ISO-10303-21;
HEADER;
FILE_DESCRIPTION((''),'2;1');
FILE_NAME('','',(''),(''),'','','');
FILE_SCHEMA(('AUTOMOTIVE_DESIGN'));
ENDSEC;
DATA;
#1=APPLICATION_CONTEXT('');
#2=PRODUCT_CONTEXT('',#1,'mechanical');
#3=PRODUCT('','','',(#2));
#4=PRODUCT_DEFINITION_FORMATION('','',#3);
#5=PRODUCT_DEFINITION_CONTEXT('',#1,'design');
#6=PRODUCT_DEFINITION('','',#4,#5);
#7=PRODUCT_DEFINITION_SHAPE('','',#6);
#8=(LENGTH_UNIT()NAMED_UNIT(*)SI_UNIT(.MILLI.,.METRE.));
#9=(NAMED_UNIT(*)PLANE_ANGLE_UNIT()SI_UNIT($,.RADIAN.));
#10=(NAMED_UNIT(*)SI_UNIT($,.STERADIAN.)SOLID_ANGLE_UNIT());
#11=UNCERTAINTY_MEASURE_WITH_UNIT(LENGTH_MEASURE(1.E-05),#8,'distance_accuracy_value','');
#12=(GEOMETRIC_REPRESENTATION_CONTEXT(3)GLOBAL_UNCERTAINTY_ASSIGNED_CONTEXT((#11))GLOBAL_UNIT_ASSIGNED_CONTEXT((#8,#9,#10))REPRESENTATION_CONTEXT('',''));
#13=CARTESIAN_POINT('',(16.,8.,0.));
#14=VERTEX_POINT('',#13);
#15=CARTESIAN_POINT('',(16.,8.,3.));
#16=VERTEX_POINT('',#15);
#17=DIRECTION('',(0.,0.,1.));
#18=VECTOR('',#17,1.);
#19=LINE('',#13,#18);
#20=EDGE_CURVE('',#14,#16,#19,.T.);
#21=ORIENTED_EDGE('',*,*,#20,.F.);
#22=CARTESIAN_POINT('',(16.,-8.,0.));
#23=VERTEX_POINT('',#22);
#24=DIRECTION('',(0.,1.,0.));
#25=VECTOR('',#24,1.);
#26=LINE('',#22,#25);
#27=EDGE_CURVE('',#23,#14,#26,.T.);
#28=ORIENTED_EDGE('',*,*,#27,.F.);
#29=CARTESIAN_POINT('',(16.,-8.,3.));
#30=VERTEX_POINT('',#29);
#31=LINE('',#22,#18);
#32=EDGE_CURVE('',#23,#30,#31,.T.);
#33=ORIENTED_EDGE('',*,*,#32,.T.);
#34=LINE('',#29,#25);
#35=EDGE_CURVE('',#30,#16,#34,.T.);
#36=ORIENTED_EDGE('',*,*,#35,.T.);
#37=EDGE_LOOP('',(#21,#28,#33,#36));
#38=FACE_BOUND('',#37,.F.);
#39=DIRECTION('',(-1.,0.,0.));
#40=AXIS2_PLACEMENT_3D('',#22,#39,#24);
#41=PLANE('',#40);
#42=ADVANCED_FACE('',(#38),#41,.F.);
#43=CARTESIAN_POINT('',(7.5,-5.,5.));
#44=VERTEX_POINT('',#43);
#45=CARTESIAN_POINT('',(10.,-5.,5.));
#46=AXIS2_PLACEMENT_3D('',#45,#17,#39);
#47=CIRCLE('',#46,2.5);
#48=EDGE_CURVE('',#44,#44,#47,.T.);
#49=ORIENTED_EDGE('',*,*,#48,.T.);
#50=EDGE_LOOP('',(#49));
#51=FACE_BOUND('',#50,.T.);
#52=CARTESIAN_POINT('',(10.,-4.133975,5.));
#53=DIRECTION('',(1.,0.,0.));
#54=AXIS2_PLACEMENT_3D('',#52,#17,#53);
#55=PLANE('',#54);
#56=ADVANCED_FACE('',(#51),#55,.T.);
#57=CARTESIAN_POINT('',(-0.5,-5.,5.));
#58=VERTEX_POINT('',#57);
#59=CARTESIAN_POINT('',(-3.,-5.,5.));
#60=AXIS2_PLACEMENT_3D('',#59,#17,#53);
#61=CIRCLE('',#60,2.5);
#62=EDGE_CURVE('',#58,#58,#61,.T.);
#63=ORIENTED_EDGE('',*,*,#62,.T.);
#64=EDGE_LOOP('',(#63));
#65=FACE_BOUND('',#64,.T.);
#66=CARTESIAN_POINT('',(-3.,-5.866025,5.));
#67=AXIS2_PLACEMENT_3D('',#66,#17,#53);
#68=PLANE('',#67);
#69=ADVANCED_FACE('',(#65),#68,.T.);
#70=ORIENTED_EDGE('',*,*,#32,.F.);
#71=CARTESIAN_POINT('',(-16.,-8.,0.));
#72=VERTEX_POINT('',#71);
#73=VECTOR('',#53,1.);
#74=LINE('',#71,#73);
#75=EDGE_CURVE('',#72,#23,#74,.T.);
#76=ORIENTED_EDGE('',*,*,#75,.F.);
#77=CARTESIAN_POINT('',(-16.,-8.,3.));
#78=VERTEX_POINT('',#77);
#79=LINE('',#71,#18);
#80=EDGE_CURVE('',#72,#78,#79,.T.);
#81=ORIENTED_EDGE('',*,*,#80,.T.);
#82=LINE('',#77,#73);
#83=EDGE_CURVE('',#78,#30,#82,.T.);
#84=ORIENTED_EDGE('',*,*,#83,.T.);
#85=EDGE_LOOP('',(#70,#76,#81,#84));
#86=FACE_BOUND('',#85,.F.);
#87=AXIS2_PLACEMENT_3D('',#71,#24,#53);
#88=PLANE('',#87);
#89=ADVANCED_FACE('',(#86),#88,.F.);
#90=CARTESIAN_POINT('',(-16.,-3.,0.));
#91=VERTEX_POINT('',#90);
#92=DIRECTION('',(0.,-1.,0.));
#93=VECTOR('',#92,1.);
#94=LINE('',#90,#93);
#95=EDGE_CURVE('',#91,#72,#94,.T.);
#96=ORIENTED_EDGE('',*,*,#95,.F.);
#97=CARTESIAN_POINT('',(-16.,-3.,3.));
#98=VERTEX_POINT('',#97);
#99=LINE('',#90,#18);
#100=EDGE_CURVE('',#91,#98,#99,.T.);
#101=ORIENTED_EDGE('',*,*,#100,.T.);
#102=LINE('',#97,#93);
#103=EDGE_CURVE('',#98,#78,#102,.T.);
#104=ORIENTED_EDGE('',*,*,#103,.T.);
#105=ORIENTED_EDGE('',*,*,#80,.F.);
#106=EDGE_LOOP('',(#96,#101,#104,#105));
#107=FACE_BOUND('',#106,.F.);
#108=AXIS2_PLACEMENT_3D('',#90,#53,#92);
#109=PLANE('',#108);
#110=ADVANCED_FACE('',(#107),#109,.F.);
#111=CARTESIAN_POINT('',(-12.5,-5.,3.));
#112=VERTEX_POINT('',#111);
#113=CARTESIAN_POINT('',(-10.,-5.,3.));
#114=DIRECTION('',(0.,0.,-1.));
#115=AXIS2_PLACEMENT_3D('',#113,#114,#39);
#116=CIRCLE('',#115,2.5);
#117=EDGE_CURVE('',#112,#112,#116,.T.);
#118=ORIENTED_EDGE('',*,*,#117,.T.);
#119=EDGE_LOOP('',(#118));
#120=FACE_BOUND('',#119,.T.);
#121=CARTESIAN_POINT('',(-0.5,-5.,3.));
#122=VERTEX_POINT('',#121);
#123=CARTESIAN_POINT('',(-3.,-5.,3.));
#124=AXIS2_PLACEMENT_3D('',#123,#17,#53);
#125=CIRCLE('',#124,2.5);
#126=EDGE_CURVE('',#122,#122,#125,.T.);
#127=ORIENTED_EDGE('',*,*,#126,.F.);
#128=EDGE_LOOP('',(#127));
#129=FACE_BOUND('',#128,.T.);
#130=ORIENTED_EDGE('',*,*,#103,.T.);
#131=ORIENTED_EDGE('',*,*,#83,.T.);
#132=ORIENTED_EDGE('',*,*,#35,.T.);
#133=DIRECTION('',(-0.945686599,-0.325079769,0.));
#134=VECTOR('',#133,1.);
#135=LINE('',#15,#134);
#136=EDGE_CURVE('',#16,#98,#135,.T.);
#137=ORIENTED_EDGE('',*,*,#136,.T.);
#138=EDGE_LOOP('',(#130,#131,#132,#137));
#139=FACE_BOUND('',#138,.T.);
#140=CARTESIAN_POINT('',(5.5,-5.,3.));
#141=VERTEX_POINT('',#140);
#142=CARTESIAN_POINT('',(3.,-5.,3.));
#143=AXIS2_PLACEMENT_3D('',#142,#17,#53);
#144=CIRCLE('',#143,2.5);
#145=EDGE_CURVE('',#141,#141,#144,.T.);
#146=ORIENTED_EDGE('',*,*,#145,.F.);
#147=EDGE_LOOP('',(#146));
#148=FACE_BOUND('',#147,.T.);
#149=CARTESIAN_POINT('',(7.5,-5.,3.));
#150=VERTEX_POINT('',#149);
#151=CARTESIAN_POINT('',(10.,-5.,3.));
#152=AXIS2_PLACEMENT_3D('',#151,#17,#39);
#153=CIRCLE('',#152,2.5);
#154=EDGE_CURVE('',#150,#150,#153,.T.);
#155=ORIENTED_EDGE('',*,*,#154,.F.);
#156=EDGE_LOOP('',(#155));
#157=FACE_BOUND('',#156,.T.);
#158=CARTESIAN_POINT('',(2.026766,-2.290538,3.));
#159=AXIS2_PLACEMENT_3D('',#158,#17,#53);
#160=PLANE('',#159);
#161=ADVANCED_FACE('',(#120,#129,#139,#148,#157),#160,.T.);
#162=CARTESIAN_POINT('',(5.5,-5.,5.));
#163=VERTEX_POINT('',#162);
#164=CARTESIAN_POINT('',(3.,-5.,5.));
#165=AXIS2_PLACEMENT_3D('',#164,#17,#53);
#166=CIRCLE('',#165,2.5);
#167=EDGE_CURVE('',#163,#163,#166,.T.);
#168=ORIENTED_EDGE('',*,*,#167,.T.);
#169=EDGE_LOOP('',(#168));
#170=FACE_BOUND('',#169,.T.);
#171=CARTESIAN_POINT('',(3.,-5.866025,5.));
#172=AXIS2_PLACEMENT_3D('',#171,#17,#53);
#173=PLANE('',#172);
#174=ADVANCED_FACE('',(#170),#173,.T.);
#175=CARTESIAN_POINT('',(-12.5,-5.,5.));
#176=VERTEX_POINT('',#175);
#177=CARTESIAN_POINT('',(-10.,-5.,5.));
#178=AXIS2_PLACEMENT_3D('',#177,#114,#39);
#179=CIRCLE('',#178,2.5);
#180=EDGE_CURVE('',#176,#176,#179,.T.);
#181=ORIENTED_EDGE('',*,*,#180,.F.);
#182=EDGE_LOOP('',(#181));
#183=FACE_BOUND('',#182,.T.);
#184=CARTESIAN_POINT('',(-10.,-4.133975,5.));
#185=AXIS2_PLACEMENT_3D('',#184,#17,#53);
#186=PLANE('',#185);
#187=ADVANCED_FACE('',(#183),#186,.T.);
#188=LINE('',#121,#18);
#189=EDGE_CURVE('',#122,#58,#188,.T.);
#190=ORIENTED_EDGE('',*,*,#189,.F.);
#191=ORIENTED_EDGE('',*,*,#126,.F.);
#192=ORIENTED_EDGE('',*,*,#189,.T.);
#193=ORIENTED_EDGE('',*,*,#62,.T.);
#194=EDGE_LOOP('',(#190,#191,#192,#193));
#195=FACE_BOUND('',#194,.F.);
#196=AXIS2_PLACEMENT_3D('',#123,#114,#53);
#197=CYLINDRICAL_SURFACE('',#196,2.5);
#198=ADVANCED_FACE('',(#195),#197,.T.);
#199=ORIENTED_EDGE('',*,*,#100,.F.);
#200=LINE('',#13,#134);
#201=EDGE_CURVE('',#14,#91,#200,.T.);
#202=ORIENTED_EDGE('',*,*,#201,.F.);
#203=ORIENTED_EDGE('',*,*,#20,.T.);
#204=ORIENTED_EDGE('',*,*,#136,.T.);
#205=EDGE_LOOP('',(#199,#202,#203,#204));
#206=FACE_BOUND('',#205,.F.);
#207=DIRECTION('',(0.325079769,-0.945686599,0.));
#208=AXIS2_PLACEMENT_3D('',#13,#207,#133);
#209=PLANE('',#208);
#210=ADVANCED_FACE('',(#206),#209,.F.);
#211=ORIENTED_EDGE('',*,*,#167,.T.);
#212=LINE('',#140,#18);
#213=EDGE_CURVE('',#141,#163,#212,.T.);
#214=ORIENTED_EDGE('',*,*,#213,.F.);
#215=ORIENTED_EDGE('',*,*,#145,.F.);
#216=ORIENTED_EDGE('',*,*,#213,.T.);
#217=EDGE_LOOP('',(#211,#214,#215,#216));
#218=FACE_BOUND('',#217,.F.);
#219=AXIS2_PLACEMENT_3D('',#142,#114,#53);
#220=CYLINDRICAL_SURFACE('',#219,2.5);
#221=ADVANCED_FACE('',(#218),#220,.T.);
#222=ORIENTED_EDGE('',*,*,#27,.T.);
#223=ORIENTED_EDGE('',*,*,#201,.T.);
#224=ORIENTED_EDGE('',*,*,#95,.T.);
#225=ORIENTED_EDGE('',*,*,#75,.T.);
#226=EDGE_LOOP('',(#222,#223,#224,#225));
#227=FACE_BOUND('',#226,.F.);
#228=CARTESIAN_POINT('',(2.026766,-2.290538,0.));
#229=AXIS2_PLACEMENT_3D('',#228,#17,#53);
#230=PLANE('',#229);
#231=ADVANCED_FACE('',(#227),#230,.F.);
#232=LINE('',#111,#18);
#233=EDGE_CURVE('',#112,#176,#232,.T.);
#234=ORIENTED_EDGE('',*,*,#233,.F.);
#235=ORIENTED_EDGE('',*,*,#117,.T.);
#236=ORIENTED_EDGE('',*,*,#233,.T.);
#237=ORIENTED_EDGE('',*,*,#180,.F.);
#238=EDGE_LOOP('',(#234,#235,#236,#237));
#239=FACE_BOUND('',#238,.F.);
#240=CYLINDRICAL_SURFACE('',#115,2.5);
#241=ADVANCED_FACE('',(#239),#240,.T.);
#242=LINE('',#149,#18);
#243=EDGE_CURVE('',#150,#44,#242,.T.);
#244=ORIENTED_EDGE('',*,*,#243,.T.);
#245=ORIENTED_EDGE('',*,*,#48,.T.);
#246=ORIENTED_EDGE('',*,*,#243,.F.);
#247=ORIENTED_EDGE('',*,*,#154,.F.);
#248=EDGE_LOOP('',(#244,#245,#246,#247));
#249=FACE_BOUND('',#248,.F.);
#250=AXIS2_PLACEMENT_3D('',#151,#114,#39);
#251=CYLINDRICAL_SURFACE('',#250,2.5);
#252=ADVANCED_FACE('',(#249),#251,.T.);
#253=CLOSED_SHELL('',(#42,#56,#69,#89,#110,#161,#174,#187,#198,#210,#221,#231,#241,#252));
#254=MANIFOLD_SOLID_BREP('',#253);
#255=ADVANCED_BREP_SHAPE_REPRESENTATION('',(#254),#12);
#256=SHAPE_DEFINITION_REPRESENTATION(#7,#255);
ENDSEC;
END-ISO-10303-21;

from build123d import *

# Parameters (mm, degrees)
F1_DEPTH = 3
F3_DEPTH = 2
F4_DEPTH = 2


# Not quite as in the source:
# - a feature names something its author has since deleted; it is built from what else it names


with BuildPart() as f1:
    # F0 (on Top) → F1 (new body)
    with BuildSketch(Plane.XY):
        Polygon((-16, -8), (16, -8), (16, 8), (-16, -3), align=None)
    extrude(amount=F1_DEPTH)

    # F2 (on face) → F3 (join)
    with BuildSketch(Plane.XY.offset(3)):
        with BuildLine():
            Line((7.5, -5), (12.5, -5))
            ThreePointArc((12.5, -5), (10, -2.5), (7.5, -5))
        make_face()
        with BuildLine():
            ThreePointArc((7.5, -5), (10, -7.5), (12.5, -5))
            Line((12.5, -5), (7.5, -5))
        make_face()
        with BuildLine():
            ThreePointArc((-7.5, -5), (-10, -2.5), (-12.5, -5))
            Line((-12.5, -5), (-7.5, -5))
        make_face()
        with BuildLine():
            Line((-7.5, -5), (-12.5, -5))
            ThreePointArc((-12.5, -5), (-10, -7.5), (-7.5, -5))
        make_face()
    extrude(amount=F3_DEPTH)

    # F2 (on face) → F4 (join)
    with BuildSketch(Plane.XY.offset(3)):
        with BuildLine():
            Line((7.5, -5), (12.5, -5))
            ThreePointArc((12.5, -5), (10, -2.5), (7.5, -5))
        make_face()
        with BuildLine():
            ThreePointArc((-12.5, -5), (-10, -7.5), (-7.5, -5))
            Line((-7.5, -5), (-12.5, -5))
        make_face()
        with BuildLine():
            Line((-12.5, -5), (-7.5, -5))
            ThreePointArc((-7.5, -5), (-10, -2.5), (-12.5, -5))
        make_face()
        with BuildLine():
            ThreePointArc((-5.5, -5), (-3, -7.5), (-0.5, -5))
            Line((-0.5, -5), (-5.5, -5))
        make_face()
        with BuildLine():
            Line((-5.5, -5), (-0.5, -5))
            ThreePointArc((-0.5, -5), (-3, -2.5), (-5.5, -5))
        make_face()
        with BuildLine():
            ThreePointArc((0.5, -5), (3, -7.5), (5.5, -5))
            Line((5.5, -5), (0.5, -5))
        make_face()
        with BuildLine():
            Line((0.5, -5), (5.5, -5))
            ThreePointArc((5.5, -5), (3, -2.5), (0.5, -5))
        make_face()
        with BuildLine():
            ThreePointArc((7.5, -5), (10, -7.5), (12.5, -5))
            Line((12.5, -5), (7.5, -5))
        make_face()
    extrude(amount=F4_DEPTH)


solid = f1.part
